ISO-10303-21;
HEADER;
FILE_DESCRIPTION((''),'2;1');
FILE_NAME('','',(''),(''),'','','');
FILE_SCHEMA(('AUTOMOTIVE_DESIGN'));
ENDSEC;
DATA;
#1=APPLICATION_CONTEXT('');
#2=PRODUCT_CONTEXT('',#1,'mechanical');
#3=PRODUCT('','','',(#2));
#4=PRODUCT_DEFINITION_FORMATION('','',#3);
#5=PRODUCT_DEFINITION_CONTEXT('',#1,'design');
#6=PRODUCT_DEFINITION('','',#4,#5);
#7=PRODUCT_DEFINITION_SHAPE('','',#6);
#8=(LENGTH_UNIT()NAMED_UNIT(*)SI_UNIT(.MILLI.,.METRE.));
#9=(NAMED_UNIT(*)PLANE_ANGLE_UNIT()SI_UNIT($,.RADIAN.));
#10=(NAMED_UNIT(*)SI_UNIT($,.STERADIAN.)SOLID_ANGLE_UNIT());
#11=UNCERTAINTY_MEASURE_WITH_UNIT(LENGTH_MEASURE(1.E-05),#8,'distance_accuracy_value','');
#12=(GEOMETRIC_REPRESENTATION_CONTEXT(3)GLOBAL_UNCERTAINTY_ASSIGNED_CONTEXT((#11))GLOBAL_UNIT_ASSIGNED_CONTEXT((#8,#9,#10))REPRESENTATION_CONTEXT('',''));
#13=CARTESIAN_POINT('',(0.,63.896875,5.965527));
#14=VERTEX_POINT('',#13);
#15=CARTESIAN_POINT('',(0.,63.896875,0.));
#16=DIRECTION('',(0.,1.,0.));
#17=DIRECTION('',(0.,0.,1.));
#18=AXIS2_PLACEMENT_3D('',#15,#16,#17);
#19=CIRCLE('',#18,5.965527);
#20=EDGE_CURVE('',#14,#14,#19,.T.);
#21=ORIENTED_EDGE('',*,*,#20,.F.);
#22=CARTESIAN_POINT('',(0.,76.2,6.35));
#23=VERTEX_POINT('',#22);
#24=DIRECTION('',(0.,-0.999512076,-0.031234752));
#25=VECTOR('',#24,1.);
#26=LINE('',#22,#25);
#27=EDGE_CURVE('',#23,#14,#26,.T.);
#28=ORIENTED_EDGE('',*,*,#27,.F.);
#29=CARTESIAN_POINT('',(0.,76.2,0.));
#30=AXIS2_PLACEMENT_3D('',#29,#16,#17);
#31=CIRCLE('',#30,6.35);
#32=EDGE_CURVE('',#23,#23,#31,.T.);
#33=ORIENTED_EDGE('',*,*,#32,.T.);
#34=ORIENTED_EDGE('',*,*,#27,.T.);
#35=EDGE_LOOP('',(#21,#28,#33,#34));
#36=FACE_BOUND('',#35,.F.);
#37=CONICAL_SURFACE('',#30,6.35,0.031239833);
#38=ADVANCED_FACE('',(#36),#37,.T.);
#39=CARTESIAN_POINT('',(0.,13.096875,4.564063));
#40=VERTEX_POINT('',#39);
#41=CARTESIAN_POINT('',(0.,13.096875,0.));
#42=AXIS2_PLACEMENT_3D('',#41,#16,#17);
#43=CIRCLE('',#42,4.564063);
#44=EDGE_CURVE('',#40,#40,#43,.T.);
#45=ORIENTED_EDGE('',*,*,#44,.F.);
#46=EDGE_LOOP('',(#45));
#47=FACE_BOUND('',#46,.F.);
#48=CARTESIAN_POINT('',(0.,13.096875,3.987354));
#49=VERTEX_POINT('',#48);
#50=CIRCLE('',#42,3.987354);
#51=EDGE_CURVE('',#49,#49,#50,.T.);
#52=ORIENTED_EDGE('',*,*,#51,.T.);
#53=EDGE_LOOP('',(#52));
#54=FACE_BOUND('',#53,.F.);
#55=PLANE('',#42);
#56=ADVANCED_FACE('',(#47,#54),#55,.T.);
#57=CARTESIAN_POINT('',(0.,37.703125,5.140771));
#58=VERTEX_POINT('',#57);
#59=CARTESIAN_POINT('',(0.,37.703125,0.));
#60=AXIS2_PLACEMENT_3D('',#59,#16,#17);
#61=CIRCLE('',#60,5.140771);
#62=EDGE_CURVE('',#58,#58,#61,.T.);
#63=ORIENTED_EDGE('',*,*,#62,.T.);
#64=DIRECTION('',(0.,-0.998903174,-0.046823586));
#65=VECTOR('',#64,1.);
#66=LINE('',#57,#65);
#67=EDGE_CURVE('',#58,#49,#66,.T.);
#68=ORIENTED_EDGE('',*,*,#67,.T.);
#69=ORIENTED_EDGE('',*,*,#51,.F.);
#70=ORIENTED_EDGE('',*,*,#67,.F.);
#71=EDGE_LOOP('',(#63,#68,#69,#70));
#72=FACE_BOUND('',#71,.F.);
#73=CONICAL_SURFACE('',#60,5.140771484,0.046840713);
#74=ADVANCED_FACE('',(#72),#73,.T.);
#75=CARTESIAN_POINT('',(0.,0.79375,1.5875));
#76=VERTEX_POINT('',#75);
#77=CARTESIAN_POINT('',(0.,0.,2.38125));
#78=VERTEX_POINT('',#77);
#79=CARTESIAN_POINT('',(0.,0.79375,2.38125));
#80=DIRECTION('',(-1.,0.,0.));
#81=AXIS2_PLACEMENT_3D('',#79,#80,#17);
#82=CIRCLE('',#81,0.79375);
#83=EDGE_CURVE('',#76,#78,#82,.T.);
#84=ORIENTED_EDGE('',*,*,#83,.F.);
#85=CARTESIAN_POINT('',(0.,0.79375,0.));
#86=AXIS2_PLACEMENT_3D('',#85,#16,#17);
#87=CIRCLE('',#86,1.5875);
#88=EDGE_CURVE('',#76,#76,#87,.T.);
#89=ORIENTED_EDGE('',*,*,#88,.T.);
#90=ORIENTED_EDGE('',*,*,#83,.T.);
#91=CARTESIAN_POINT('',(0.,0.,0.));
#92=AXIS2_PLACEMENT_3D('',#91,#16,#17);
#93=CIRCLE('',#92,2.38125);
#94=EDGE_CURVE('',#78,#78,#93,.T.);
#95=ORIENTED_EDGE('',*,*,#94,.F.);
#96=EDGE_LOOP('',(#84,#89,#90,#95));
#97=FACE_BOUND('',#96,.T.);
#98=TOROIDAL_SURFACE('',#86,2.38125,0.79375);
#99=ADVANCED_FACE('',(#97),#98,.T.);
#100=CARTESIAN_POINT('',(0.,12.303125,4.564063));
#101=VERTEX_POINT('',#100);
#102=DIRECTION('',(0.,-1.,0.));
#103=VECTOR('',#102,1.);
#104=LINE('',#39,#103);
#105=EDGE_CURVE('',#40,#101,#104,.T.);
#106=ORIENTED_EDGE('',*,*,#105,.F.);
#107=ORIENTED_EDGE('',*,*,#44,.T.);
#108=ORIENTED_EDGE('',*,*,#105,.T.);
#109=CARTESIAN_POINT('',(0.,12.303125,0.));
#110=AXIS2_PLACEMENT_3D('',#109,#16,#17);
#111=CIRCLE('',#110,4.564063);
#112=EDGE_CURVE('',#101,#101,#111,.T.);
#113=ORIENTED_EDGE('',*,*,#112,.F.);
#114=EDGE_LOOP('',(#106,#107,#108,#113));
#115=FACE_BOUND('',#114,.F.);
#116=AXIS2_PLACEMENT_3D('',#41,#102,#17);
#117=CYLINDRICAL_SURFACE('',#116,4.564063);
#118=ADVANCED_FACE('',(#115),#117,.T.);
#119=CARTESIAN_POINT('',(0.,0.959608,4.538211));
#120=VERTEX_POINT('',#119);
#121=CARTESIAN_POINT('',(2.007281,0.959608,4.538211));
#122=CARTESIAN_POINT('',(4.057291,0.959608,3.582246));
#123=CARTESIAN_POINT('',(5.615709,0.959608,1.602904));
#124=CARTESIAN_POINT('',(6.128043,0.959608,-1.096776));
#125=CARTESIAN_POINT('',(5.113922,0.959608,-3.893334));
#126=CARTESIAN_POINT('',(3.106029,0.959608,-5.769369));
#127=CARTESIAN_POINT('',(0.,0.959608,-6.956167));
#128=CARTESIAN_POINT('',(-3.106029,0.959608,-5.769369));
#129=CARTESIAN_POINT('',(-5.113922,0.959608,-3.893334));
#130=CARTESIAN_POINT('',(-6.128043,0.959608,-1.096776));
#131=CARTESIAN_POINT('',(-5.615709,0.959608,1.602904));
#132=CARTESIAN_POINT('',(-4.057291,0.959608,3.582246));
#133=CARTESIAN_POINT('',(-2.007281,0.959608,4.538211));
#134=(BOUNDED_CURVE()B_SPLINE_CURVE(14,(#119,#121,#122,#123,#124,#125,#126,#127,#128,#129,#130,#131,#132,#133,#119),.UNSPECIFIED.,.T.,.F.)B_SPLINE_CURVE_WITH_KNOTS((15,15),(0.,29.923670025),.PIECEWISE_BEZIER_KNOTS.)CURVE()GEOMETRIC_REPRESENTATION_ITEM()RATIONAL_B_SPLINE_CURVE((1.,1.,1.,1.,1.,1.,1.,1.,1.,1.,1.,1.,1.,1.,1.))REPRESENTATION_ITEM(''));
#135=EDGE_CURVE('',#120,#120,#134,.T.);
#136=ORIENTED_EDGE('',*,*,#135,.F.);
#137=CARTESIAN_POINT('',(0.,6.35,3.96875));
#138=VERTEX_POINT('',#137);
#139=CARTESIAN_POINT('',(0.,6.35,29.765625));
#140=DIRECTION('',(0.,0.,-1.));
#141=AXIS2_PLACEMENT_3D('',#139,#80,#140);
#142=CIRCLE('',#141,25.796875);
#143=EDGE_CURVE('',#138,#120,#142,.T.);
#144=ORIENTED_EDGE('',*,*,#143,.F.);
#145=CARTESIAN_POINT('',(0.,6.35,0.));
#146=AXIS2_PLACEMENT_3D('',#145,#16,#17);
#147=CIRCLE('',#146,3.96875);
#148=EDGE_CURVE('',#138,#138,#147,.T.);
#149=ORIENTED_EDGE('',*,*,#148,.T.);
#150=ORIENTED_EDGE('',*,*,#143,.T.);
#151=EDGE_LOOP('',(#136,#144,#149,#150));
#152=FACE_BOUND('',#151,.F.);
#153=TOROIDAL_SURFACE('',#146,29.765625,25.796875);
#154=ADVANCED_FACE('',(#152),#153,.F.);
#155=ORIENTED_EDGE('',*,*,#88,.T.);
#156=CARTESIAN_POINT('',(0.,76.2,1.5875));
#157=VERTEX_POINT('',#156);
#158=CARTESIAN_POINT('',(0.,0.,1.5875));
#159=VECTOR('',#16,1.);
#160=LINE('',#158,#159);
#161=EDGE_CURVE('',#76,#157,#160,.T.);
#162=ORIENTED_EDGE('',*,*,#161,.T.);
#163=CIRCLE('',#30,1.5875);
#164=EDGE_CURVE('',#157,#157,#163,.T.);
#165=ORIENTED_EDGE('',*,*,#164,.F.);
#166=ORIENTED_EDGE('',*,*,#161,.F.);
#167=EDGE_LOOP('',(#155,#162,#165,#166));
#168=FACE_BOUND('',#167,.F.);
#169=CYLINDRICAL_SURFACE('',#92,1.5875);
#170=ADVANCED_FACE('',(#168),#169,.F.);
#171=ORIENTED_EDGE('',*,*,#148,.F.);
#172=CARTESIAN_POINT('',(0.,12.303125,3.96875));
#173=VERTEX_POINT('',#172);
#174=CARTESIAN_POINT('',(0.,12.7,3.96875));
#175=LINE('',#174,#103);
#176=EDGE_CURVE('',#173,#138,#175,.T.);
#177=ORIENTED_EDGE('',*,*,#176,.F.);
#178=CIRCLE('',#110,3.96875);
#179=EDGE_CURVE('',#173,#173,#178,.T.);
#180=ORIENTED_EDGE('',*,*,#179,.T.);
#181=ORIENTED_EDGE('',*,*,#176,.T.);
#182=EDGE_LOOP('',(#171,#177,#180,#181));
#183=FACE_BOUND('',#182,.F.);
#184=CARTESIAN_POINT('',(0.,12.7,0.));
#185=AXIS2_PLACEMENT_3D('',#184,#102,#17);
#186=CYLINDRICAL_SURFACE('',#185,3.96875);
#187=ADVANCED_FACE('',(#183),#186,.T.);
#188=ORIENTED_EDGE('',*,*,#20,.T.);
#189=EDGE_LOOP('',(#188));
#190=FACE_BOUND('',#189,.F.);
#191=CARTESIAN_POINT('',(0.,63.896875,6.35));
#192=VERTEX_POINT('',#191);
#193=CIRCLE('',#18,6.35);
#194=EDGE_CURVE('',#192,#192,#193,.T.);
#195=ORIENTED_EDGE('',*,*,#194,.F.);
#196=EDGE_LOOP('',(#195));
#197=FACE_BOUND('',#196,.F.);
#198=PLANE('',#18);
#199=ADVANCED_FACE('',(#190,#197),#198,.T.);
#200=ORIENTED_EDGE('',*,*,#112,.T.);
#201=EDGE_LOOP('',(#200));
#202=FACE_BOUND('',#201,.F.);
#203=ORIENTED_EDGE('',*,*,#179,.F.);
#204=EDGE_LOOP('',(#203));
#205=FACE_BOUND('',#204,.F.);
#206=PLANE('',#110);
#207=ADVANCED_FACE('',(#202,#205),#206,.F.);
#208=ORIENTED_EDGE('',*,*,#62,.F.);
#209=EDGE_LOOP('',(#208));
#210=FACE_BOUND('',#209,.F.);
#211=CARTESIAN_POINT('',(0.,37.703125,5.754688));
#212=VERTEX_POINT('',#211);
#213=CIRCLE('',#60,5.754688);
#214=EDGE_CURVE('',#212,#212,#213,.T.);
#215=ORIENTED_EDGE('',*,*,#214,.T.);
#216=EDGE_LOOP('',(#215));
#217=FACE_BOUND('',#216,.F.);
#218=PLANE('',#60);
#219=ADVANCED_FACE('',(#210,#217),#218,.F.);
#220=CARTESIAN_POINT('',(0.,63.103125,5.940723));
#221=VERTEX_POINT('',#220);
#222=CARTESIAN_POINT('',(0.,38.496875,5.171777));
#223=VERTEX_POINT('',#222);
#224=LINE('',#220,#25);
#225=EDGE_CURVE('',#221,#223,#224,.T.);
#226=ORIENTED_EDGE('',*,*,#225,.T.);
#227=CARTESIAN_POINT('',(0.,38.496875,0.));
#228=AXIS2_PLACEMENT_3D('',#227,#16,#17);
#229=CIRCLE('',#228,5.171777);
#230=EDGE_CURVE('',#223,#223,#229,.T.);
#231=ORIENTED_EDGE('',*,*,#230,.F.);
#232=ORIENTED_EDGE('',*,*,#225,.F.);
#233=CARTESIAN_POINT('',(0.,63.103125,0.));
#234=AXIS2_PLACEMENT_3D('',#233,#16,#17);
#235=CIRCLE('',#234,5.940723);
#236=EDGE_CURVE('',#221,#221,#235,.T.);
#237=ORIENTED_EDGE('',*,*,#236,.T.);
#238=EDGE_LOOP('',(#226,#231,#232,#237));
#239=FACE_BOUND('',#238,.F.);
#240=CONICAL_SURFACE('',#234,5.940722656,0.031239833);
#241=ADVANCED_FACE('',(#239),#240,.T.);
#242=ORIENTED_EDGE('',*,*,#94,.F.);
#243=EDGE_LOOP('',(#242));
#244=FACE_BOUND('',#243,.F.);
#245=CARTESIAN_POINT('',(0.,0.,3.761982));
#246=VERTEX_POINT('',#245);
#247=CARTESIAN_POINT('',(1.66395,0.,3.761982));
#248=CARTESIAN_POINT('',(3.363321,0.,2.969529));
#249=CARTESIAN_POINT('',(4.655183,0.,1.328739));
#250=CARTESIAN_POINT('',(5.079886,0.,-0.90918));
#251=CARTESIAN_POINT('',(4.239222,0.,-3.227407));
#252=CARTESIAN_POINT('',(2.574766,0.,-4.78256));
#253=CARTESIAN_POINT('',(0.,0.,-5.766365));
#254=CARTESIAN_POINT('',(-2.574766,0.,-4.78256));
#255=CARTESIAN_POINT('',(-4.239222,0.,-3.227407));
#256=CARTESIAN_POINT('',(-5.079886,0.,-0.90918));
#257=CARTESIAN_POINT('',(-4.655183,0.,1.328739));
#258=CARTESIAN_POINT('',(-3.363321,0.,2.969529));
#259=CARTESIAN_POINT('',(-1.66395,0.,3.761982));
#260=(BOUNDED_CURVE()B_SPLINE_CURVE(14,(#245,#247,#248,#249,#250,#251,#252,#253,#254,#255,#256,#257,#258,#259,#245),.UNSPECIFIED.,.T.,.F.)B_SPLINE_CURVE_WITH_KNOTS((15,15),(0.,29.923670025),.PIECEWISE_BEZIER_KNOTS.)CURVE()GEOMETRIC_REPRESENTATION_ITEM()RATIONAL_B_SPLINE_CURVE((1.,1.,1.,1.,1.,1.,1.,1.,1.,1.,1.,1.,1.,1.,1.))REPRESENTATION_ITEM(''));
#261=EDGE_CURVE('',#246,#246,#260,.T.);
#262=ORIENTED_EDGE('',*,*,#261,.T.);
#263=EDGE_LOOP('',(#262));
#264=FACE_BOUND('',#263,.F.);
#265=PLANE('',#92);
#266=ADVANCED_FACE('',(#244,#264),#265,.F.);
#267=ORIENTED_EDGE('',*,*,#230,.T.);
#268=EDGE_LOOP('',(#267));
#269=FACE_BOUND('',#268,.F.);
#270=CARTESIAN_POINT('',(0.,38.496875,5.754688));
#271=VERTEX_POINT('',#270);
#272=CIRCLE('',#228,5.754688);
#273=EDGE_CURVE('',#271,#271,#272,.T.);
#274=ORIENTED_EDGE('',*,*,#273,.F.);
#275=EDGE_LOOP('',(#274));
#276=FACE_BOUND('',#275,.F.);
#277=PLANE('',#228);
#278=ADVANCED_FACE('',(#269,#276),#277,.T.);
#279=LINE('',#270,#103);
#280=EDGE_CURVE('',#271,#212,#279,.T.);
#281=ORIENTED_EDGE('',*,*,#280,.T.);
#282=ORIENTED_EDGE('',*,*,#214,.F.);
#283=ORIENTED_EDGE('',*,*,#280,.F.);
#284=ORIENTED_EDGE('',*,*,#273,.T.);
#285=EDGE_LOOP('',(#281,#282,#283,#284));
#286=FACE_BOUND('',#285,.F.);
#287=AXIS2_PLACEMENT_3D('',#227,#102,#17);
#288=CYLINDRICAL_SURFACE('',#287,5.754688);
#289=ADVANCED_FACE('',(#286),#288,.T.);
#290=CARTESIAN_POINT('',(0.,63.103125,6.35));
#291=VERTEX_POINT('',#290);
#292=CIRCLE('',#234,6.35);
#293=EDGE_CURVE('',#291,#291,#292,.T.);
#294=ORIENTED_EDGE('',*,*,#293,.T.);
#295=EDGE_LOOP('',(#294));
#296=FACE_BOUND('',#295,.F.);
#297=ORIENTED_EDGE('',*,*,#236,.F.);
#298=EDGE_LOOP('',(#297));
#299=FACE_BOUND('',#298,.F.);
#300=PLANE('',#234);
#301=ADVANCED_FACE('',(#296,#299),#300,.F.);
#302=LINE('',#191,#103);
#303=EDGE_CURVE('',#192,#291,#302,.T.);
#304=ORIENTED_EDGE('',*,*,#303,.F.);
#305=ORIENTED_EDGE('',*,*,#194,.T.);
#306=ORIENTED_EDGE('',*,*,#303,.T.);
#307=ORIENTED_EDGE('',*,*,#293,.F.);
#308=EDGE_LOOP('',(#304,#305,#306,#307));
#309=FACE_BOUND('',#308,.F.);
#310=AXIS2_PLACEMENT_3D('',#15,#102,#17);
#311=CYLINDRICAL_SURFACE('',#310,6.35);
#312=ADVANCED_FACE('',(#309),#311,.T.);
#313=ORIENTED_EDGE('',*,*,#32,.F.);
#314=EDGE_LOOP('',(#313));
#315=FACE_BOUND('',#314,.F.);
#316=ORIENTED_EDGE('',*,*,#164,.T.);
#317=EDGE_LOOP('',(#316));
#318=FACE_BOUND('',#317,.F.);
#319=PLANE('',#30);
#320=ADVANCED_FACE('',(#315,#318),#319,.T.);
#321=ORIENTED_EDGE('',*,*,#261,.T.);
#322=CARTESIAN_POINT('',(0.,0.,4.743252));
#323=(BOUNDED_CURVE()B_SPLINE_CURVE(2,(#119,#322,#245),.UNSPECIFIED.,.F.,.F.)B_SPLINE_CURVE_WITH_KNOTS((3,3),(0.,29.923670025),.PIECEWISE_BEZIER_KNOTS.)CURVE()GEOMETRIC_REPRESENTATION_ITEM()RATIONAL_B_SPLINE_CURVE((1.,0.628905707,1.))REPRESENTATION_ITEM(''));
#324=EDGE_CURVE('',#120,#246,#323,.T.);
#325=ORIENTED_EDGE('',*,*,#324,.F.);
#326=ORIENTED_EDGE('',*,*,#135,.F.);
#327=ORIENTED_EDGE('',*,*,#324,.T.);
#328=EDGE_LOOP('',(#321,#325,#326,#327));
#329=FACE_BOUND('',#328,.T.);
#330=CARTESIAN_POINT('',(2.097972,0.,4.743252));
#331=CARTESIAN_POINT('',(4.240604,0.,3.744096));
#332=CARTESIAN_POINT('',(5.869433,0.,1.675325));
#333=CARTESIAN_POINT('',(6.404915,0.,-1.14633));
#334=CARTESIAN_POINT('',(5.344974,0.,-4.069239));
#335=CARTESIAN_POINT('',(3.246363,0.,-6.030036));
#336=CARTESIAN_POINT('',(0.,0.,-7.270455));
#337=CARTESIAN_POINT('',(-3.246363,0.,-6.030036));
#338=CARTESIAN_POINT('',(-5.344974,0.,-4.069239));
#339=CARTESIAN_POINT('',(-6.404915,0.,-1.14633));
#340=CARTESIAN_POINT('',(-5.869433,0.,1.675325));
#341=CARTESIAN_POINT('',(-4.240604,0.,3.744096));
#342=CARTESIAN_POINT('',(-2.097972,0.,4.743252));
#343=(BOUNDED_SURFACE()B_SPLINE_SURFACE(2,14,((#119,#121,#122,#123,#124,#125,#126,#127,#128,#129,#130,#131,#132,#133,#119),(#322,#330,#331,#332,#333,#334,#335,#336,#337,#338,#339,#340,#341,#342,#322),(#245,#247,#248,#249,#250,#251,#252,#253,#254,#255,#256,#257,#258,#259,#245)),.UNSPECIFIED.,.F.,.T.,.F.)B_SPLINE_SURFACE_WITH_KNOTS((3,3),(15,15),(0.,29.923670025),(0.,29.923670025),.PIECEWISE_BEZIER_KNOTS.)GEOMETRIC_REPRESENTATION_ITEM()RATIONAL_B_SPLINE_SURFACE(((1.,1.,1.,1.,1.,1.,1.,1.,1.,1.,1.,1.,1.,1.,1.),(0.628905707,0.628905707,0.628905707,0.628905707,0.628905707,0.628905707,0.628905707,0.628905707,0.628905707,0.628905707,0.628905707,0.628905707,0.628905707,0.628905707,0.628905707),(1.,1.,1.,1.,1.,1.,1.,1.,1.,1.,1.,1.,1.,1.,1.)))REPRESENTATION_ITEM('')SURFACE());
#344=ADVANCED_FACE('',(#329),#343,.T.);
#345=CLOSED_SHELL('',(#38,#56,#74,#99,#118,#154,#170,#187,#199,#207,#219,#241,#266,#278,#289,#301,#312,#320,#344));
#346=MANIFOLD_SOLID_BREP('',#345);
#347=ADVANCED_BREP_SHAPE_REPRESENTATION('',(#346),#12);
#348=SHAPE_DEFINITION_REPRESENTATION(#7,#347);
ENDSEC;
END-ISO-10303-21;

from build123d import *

# Parameters (mm, degrees)
F2_R = 0.79375


with BuildPart() as f1:
    # F0 (on Right) → F1 (revolve)
    with BuildSketch(Plane.YZ):
        with BuildLine():
            Line((0, 1.5875), (12.303125, 1.5875))
            Line((12.303125, 1.5875), (12.303125, 3.96875))
            Line((12.303125, 3.96875), (6.35, 3.96875))
            ThreePointArc((6.35, 3.96875), (3.1502914561, 4.1679566492), (0, 4.7625))
            Line((0, 4.7625), (0, 1.5875))
        make_face()
        Polygon((12.303125, 1.5875), (13.096875, 1.5875), (13.096875, 3.9873535156), (12.7, 3.96875), (12.303125, 3.96875), align=None)
        Polygon((12.7, 3.96875), (13.096875, 3.9873535156), (13.096875, 4.5640625), (12.303125, 4.5640625), (12.303125, 3.96875), align=None)
        Polygon((13.096875, 1.5875), (37.703125, 1.5875), (37.703125, 5.1407714844), (13.096875, 3.9873535156), align=None)
        Polygon((37.703125, 1.5875), (38.496875, 1.5875), (38.496875, 5.1717773437), (38.1, 5.159375), (37.703125, 5.1407714844), align=None)
        Polygon((38.1, 5.159375), (38.496875, 5.1717773437), (38.496875, 5.7546875), (37.703125, 5.7546875), (37.703125, 5.1407714844), align=None)
        Polygon((38.496875, 1.5875), (63.103125, 1.5875), (63.103125, 5.9407226563), (38.496875, 5.1717773437), align=None)
        Polygon((63.896875, 1.5875), (76.2, 1.5875), (76.2, 6.35), (63.896875, 5.9655273437), align=None)
        Polygon((63.103125, 1.5875), (63.896875, 1.5875), (63.896875, 5.9655273437), (63.5, 5.953125), (63.103125, 5.9407226563), align=None)
        Polygon((63.5, 5.953125), (63.896875, 5.9655273437), (63.896875, 6.35), (63.103125, 6.35), (63.103125, 5.9407226563), align=None)
    revolve(axis=Axis((0, 38.1, 0), (0, 1, 0)))

    # F2
    f2_edges = [f1.edges().sort_by_distance(p)[0] for p in [
        (0, 0, -4.7625),
        (0, 0, -1.5875),
    ]]
    fillet(f2_edges, radius=F2_R)


solid = f1.part
